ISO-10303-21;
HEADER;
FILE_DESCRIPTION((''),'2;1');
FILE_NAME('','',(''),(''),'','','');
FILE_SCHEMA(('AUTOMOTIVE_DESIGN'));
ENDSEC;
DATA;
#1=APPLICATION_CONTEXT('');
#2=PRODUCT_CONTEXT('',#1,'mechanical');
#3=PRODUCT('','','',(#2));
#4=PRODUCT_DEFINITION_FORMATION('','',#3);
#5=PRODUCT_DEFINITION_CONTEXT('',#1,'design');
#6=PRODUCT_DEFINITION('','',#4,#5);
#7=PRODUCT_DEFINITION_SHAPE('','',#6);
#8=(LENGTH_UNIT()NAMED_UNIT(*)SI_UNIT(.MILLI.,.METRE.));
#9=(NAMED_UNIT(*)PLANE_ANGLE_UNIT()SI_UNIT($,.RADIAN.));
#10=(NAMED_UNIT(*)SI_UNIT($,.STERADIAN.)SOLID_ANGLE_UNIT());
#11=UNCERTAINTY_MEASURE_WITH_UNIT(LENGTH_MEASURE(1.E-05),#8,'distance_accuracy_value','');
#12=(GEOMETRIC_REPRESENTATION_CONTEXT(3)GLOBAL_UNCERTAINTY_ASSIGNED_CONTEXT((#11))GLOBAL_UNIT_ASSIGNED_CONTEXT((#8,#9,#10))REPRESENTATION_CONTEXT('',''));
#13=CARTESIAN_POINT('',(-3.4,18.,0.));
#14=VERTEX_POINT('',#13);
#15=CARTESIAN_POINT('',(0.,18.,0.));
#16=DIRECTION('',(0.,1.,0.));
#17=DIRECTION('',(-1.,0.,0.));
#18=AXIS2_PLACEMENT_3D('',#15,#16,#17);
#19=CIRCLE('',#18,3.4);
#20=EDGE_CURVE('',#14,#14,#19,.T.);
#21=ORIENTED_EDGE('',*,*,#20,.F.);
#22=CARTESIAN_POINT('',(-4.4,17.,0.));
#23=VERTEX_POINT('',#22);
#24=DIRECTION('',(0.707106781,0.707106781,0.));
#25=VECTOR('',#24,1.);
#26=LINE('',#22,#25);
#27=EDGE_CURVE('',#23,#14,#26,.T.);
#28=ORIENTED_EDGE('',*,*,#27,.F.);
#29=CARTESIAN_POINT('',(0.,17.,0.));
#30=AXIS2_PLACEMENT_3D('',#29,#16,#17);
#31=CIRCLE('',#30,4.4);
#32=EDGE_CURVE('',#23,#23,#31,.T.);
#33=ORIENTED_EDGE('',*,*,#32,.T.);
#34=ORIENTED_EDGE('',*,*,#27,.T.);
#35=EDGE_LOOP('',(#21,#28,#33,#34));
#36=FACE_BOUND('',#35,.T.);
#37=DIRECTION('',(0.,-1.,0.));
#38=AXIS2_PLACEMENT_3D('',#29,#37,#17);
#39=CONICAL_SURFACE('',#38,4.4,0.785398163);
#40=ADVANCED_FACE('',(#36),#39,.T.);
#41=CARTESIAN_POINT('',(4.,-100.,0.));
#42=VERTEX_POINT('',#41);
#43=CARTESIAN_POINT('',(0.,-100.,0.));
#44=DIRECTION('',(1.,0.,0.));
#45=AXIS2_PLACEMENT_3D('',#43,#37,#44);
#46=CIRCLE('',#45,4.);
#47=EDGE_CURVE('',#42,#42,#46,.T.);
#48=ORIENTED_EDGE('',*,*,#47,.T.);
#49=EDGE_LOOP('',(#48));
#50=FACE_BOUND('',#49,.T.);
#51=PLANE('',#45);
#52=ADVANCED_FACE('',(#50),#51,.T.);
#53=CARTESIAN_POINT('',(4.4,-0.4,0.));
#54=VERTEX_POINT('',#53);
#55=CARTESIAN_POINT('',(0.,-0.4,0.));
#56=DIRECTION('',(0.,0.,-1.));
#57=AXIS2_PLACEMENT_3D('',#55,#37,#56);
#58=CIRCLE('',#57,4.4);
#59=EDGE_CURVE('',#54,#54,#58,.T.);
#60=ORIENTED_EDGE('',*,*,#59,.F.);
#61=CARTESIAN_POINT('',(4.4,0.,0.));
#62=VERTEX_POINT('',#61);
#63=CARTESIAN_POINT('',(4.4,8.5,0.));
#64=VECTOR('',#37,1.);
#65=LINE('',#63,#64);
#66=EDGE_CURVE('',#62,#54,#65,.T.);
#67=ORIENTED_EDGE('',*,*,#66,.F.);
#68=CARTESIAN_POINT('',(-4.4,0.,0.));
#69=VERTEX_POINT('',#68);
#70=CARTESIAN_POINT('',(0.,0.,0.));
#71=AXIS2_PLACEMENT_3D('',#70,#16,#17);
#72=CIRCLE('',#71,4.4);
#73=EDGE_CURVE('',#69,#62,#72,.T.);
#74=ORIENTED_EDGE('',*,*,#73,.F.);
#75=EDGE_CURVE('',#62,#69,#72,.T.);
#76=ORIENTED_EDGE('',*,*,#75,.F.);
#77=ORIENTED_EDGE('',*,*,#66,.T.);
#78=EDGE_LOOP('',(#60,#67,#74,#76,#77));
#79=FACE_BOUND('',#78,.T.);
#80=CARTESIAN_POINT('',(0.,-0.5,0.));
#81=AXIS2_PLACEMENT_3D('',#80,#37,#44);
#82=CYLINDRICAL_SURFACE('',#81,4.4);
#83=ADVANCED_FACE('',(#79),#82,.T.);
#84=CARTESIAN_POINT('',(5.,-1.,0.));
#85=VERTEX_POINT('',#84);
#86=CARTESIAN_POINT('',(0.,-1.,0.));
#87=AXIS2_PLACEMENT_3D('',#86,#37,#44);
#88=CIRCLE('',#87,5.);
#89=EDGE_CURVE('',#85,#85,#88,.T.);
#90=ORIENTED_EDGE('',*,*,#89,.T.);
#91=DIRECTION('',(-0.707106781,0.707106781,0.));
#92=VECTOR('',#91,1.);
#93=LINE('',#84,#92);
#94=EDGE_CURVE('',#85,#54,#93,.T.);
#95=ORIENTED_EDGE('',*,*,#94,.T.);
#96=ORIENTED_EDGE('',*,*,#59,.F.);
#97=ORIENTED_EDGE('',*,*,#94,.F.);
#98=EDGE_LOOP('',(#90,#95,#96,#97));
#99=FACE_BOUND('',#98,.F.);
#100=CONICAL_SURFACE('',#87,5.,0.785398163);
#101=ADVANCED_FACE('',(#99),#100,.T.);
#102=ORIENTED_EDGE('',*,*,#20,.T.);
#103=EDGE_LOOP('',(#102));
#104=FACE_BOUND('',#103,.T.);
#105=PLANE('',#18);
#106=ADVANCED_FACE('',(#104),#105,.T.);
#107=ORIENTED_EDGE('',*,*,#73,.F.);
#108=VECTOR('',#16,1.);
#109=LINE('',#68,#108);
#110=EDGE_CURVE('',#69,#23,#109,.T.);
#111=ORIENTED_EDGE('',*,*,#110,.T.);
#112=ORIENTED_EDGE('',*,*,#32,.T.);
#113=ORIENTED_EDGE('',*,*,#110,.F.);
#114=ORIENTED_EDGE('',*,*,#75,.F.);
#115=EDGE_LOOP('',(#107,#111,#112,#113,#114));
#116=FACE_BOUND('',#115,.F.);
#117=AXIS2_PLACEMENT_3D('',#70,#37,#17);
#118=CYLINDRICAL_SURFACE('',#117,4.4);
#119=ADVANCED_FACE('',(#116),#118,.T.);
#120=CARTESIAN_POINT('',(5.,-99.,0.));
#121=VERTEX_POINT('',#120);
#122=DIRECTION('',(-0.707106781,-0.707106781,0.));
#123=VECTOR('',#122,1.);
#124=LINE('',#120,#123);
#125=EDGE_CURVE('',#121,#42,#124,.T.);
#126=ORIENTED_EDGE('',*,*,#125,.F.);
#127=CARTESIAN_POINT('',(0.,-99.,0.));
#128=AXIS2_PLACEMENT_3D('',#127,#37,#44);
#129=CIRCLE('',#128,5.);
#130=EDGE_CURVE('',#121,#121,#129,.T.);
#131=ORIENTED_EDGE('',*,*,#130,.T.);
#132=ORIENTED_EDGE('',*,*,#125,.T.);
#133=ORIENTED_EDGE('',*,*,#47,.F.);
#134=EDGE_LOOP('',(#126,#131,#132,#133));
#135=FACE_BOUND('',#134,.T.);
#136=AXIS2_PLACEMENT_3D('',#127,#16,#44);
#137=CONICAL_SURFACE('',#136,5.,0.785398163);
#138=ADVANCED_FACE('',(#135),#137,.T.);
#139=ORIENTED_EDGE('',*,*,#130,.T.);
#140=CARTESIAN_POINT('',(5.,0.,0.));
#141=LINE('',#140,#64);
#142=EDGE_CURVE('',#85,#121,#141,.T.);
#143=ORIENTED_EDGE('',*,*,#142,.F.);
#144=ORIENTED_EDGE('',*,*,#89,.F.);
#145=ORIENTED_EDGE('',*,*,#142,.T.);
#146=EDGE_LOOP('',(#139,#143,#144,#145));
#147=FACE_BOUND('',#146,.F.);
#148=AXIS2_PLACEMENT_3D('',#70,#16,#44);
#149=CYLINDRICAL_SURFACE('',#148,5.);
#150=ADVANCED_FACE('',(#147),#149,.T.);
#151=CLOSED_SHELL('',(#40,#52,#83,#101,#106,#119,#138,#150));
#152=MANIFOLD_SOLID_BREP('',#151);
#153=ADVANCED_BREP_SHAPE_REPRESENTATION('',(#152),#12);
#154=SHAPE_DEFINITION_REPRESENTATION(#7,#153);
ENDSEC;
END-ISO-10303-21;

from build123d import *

# Parameters (mm, degrees)
F0_R        = 5
F1_DEPTH    = 100
F2_R        = 4.4
F3_DEPTH    = 18
F4_S5_R     = 4.4
F4_T6_DEPTH = 9
F5_SIZE     = 1


# Not quite as in the source:
# - a fillet or chamfer that OpenCascade refuses, or shapes differently, is made with other operations: its cross-section is extruded or revolved along the edge and cut away or added


with BuildPart() as f1:
    # F0 (on Front) → F1 (new body)
    with BuildSketch(Plane.XZ):
        Circle(F0_R)
    extrude(amount=F1_DEPTH)

    # F2 (on face) → F3 (join)
    with BuildSketch(Plane(origin=(0, 0, 0), x_dir=(-1, 0, 0), z_dir=(0, 1, 0))):
        Circle(F2_R)
    extrude(amount=F3_DEPTH)

    # F4: chamfer of 1 on 1 edges, made by hand


with BuildPart() as f4_tool2:
    # F4_s3 → F4_t4 (revolve)
    with BuildSketch(Plane.XY):
        Polygon((5, -1), (4, 0), (5, 0), align=None)
    revolve(axis=Axis((0, 0, 0), (0, -1, 0)))

    # F4_s5 → F4_t6 (cut, symmetric)
    with BuildSketch(Plane.XZ.offset(0.5)):
        Circle(F4_S5_R)
    extrude(amount=F4_T6_DEPTH, both=True, mode=Mode.SUBTRACT)


with BuildPart() as f1_1:
    add(f1.part)

    # F4_t1: cut F4_tool2
    add(f4_tool2.part, mode=Mode.SUBTRACT)

    # F5
    f5_edges = [f1_1.edges().sort_by_distance(p)[0] for p in [
        (-5, -100, 0),
        (4.4, 18, 0),
    ]]
    chamfer(f5_edges, length=F5_SIZE)


solid = f1_1.part
